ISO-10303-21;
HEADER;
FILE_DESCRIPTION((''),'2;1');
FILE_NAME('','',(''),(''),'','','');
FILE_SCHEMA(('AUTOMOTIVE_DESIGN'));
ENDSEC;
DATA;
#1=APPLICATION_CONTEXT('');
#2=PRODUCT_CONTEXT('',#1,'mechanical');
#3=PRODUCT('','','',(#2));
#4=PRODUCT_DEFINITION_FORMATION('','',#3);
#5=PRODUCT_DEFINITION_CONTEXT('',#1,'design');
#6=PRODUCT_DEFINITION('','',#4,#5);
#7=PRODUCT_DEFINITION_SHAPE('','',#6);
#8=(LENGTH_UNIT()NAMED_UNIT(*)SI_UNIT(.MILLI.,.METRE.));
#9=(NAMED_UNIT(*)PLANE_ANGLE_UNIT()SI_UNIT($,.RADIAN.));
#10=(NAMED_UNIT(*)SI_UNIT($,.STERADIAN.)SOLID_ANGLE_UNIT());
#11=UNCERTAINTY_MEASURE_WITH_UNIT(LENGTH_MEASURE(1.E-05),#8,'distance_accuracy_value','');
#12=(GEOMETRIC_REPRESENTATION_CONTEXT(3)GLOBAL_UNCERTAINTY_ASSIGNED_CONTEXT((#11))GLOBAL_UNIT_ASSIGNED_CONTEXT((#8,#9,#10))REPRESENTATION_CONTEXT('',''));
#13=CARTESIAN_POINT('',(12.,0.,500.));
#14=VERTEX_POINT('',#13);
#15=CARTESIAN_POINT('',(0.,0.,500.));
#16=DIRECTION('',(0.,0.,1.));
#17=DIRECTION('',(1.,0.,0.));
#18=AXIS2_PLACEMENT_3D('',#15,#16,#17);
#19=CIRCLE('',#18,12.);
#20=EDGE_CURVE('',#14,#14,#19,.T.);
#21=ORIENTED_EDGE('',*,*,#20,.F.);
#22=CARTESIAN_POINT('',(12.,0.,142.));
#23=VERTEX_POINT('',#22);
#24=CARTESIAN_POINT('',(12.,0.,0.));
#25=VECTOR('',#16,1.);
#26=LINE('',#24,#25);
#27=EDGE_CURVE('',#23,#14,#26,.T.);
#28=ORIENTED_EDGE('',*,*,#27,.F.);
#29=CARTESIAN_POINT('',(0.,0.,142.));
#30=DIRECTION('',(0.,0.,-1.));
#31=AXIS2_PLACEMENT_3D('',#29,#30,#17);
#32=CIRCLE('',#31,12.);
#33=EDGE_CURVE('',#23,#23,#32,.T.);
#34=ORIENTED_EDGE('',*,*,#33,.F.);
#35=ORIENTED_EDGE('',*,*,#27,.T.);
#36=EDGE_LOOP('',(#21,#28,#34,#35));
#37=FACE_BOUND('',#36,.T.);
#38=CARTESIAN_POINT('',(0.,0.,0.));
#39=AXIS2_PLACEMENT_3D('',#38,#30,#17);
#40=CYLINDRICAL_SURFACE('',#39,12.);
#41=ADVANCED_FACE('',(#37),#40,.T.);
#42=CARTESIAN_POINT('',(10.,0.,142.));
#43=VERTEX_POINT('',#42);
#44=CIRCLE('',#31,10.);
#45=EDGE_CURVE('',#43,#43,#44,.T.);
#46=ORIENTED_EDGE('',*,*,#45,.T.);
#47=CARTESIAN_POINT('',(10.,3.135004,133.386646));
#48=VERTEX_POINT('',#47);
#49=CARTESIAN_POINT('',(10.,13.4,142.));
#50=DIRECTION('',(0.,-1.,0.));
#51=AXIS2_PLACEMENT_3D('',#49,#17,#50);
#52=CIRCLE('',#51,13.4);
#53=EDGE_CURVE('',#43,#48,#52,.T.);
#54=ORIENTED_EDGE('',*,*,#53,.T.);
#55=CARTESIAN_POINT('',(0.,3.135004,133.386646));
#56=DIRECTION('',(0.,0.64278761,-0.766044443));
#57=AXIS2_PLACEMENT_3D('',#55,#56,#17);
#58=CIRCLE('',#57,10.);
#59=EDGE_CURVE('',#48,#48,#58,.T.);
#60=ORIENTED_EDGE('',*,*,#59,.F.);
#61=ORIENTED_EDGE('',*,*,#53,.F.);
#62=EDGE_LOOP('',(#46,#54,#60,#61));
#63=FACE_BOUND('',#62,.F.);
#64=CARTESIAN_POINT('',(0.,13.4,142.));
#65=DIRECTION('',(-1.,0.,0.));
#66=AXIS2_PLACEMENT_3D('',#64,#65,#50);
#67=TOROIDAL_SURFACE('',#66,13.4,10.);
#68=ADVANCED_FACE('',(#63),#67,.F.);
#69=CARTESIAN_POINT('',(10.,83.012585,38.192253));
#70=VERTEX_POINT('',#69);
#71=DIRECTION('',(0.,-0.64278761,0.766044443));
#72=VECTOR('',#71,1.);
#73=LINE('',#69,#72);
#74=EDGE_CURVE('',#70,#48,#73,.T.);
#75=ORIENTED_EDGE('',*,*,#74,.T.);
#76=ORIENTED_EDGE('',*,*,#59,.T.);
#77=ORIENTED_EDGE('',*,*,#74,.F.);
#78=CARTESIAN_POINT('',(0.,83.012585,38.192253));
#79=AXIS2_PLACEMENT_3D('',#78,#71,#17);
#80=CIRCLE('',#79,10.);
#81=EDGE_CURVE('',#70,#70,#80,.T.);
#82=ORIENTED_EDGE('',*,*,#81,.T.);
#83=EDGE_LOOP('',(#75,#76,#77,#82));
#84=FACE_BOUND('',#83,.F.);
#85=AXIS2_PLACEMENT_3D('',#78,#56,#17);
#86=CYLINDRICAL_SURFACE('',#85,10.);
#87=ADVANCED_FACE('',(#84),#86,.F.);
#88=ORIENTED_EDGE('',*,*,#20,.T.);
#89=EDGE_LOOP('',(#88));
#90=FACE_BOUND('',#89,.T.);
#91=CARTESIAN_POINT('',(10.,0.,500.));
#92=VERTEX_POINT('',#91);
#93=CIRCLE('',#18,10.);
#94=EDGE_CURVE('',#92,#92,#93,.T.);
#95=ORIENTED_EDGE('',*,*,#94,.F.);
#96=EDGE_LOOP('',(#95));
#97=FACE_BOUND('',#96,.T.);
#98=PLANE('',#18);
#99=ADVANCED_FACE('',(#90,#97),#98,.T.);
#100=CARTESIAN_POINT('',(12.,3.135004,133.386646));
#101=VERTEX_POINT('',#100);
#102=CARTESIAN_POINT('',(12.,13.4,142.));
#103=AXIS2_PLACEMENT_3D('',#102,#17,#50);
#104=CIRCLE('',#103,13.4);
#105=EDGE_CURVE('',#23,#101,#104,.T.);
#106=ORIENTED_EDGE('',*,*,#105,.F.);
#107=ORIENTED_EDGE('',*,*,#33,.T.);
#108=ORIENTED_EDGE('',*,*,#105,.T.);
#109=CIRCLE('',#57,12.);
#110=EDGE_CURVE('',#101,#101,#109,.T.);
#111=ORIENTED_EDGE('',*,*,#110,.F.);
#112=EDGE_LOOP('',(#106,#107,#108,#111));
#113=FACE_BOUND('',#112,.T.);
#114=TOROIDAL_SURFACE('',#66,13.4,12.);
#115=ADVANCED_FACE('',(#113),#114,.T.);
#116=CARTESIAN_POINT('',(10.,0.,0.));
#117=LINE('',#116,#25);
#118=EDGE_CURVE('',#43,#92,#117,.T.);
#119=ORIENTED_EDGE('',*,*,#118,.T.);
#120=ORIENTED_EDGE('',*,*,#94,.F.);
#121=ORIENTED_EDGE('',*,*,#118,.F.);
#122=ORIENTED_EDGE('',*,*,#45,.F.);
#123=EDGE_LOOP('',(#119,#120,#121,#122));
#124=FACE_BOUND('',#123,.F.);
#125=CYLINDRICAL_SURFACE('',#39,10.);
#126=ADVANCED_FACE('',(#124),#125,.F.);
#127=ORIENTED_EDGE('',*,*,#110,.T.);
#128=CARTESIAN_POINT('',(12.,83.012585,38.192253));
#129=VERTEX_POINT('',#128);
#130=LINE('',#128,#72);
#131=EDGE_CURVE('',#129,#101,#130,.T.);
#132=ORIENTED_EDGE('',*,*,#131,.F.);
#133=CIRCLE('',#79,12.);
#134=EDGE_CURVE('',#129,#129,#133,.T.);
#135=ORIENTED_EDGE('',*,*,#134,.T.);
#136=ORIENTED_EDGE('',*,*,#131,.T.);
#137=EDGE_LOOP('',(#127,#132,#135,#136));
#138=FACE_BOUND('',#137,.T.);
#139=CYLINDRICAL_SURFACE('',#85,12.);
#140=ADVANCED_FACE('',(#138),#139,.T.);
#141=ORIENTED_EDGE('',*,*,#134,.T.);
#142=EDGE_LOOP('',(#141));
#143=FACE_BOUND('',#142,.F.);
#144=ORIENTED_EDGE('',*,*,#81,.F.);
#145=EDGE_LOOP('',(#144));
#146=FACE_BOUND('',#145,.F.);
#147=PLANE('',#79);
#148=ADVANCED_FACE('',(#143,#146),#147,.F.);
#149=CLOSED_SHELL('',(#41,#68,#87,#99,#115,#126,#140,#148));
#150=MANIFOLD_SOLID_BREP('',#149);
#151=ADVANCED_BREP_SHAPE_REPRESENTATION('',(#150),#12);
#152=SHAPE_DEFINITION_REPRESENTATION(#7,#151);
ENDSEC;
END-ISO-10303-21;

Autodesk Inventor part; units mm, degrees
ref_plane "YZ Plane" through (0, 0, 0) normal (1, 0, 0) x (0, 1, 0)
ref_plane "XY Plane" through (0, 0, 0) normal (0, 0, 1) x (1, 0, 0)
sketch "Sketch1" plane through (0, 0, 0) normal (0, 0, 1) x (1, 0, 0)
  circle A0 centre (0, 0) radius 12
  circle A1 centre (0, 0) radius 10
  dimension "d0" = 24
  dimension "d1" = 20
extrude "Extrusion1" add sketch "Sketch1" along normal blind 500
ref_plane "Work Plane1" through (0, -12, 0) normal (0, 1, 0) x (-1, 0, 0)
sketch "Sketch2" plane through (0, -12, 0) normal (0, 1, 0) x (-1, 0, 0)
  line L0 (-136.7178, 142) -> (138.1684, 142)
  line L1 (12, 0) -> (-12, 0) projected
  point P0 (0, 0)
  dimension "d4" = 142
bend part "Bend Part1" radius 25.4 angle 40 line through (136.7178, -12, 142) along (-1, 0, 0) centre toward (0, 1, 0) moving side (0, 0, -1) both sides no
properties part number "Sit Link 2"
